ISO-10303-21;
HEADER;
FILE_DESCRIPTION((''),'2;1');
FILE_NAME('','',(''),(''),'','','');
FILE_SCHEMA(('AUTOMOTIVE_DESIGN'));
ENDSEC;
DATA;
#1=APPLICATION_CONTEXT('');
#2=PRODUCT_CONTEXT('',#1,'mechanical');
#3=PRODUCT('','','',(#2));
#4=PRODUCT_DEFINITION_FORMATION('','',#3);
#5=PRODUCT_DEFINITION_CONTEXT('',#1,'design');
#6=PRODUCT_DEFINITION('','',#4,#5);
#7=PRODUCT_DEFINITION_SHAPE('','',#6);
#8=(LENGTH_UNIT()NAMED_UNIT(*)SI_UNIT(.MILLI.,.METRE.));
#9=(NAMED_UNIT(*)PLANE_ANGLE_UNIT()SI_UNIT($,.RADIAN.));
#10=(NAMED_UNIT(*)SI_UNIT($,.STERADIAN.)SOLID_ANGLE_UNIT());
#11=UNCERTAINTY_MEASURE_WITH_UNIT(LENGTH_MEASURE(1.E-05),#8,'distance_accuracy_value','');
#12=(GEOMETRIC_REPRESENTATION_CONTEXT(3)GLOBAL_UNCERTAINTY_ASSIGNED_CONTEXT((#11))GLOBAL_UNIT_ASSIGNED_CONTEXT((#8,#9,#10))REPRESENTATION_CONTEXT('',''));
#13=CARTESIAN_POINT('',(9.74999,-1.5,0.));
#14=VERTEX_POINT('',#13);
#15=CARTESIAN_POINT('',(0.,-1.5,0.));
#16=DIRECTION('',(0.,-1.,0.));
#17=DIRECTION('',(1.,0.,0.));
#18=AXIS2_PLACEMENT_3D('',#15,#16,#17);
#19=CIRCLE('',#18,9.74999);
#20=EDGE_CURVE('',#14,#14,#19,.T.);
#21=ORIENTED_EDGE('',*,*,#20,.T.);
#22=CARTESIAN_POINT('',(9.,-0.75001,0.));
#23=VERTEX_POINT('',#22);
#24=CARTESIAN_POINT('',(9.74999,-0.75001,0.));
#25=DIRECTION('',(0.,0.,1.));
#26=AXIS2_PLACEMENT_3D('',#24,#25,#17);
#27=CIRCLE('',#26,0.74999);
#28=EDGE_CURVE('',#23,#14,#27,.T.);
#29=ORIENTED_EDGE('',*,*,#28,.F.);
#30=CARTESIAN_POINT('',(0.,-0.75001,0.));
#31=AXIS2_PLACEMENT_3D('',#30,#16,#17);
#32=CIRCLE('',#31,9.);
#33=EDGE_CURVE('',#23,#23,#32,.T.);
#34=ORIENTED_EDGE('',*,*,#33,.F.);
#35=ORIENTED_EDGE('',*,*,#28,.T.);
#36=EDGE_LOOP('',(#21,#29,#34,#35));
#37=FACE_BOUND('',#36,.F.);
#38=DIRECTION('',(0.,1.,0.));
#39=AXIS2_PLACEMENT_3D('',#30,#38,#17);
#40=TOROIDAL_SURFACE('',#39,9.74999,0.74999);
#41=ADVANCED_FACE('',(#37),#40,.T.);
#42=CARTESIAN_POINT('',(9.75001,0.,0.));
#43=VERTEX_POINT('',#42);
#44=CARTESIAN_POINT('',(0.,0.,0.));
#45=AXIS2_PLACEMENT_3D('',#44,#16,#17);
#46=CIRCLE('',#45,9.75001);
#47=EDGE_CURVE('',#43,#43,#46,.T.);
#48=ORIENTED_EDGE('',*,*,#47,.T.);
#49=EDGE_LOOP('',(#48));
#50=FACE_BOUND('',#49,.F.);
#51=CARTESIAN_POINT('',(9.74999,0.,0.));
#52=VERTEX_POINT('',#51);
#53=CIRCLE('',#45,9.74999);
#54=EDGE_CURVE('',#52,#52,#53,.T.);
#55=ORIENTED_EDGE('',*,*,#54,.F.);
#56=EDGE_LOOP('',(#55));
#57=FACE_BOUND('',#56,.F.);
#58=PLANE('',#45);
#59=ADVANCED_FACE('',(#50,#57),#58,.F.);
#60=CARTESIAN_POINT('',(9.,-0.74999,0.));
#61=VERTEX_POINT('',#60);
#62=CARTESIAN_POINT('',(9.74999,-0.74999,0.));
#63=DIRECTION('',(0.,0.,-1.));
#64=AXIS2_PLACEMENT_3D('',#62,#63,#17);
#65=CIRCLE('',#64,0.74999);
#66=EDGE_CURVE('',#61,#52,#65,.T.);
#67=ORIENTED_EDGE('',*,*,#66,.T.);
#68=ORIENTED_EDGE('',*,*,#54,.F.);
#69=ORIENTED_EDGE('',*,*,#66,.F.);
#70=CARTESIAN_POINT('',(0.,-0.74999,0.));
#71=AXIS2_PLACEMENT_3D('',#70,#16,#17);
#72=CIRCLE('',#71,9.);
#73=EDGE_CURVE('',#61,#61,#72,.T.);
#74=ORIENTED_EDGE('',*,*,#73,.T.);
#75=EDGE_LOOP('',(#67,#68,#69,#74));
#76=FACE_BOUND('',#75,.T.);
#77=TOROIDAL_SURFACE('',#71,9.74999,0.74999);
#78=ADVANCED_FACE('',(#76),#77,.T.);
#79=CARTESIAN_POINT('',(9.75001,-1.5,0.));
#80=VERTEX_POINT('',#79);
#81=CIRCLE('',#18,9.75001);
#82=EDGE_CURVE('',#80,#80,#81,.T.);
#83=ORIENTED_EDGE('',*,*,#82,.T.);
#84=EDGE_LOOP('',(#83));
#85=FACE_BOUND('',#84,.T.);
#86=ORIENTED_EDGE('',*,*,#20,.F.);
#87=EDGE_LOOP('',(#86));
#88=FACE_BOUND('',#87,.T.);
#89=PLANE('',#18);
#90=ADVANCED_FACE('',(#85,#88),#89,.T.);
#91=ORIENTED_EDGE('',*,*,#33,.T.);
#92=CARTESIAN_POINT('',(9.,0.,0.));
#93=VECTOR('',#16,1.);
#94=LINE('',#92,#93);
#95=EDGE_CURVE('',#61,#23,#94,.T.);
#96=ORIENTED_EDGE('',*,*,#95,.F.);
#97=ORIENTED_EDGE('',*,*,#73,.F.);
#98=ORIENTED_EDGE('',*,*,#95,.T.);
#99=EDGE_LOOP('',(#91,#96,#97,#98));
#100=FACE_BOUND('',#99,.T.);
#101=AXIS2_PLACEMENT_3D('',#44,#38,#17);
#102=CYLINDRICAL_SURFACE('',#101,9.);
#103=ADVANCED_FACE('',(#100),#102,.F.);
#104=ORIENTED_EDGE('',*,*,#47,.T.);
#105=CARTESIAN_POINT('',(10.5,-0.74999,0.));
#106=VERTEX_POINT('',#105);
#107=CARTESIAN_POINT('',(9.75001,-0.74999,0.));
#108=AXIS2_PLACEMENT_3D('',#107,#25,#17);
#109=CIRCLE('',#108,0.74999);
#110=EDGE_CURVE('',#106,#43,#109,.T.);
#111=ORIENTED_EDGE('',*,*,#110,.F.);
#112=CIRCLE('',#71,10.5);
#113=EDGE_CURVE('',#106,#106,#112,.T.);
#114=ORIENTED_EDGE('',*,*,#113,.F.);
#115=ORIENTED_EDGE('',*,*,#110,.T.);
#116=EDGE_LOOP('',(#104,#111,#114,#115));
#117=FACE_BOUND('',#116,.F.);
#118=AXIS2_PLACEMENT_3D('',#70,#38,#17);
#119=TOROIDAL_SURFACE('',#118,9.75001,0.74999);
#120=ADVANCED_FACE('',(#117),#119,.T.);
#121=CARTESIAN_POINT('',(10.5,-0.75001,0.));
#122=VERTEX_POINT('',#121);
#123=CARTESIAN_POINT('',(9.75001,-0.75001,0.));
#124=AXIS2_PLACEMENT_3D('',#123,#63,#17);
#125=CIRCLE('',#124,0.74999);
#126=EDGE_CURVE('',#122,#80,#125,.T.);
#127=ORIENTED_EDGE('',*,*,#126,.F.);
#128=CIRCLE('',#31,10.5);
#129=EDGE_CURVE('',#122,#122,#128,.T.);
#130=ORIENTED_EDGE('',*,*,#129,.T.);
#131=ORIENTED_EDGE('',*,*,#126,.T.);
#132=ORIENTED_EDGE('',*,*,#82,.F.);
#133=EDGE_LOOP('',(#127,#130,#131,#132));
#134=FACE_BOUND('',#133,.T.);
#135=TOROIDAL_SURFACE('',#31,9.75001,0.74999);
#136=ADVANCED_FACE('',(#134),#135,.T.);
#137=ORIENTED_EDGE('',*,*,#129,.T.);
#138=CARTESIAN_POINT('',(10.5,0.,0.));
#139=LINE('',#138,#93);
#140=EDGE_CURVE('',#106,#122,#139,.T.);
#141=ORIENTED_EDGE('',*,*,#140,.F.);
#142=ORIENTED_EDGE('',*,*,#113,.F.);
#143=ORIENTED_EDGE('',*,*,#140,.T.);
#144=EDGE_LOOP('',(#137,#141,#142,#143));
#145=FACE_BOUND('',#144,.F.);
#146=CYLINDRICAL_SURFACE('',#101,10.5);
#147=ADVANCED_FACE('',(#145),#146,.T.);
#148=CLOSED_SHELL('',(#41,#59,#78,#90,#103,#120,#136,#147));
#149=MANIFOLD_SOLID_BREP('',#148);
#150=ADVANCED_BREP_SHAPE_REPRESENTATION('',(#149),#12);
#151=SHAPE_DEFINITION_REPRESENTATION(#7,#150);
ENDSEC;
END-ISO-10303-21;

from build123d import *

# Parameters (mm, degrees)
F0_R     = 10.5
F0_R_2   = 9
F1_DEPTH = 1.5
F2_R     = 0.74999


# Not quite as in the source:
# - a fillet or chamfer is up to 0.001 mm smaller than in the source, because OpenCascade refuses the exact size


with BuildPart() as f1:
    # F0 (on Front) → F1 (new body)
    with BuildSketch(Plane.XZ):
        Circle(F0_R)
        Circle(F0_R_2, mode=Mode.SUBTRACT)
    extrude(amount=F1_DEPTH)

    # F2 (radius 0.75 in the source; OpenCascade refuses exactly that, so slightly less here)
    f2_edges = [f1.edges().sort_by_distance(p)[0] for p in [
        (-9, -1.5, 0),
        (-10.5, -1.5, 0),
        (-9, 0, 0),
        (-10.5, 0, 0),
    ]]
    fillet(f2_edges, radius=F2_R)


solid = f1.part
